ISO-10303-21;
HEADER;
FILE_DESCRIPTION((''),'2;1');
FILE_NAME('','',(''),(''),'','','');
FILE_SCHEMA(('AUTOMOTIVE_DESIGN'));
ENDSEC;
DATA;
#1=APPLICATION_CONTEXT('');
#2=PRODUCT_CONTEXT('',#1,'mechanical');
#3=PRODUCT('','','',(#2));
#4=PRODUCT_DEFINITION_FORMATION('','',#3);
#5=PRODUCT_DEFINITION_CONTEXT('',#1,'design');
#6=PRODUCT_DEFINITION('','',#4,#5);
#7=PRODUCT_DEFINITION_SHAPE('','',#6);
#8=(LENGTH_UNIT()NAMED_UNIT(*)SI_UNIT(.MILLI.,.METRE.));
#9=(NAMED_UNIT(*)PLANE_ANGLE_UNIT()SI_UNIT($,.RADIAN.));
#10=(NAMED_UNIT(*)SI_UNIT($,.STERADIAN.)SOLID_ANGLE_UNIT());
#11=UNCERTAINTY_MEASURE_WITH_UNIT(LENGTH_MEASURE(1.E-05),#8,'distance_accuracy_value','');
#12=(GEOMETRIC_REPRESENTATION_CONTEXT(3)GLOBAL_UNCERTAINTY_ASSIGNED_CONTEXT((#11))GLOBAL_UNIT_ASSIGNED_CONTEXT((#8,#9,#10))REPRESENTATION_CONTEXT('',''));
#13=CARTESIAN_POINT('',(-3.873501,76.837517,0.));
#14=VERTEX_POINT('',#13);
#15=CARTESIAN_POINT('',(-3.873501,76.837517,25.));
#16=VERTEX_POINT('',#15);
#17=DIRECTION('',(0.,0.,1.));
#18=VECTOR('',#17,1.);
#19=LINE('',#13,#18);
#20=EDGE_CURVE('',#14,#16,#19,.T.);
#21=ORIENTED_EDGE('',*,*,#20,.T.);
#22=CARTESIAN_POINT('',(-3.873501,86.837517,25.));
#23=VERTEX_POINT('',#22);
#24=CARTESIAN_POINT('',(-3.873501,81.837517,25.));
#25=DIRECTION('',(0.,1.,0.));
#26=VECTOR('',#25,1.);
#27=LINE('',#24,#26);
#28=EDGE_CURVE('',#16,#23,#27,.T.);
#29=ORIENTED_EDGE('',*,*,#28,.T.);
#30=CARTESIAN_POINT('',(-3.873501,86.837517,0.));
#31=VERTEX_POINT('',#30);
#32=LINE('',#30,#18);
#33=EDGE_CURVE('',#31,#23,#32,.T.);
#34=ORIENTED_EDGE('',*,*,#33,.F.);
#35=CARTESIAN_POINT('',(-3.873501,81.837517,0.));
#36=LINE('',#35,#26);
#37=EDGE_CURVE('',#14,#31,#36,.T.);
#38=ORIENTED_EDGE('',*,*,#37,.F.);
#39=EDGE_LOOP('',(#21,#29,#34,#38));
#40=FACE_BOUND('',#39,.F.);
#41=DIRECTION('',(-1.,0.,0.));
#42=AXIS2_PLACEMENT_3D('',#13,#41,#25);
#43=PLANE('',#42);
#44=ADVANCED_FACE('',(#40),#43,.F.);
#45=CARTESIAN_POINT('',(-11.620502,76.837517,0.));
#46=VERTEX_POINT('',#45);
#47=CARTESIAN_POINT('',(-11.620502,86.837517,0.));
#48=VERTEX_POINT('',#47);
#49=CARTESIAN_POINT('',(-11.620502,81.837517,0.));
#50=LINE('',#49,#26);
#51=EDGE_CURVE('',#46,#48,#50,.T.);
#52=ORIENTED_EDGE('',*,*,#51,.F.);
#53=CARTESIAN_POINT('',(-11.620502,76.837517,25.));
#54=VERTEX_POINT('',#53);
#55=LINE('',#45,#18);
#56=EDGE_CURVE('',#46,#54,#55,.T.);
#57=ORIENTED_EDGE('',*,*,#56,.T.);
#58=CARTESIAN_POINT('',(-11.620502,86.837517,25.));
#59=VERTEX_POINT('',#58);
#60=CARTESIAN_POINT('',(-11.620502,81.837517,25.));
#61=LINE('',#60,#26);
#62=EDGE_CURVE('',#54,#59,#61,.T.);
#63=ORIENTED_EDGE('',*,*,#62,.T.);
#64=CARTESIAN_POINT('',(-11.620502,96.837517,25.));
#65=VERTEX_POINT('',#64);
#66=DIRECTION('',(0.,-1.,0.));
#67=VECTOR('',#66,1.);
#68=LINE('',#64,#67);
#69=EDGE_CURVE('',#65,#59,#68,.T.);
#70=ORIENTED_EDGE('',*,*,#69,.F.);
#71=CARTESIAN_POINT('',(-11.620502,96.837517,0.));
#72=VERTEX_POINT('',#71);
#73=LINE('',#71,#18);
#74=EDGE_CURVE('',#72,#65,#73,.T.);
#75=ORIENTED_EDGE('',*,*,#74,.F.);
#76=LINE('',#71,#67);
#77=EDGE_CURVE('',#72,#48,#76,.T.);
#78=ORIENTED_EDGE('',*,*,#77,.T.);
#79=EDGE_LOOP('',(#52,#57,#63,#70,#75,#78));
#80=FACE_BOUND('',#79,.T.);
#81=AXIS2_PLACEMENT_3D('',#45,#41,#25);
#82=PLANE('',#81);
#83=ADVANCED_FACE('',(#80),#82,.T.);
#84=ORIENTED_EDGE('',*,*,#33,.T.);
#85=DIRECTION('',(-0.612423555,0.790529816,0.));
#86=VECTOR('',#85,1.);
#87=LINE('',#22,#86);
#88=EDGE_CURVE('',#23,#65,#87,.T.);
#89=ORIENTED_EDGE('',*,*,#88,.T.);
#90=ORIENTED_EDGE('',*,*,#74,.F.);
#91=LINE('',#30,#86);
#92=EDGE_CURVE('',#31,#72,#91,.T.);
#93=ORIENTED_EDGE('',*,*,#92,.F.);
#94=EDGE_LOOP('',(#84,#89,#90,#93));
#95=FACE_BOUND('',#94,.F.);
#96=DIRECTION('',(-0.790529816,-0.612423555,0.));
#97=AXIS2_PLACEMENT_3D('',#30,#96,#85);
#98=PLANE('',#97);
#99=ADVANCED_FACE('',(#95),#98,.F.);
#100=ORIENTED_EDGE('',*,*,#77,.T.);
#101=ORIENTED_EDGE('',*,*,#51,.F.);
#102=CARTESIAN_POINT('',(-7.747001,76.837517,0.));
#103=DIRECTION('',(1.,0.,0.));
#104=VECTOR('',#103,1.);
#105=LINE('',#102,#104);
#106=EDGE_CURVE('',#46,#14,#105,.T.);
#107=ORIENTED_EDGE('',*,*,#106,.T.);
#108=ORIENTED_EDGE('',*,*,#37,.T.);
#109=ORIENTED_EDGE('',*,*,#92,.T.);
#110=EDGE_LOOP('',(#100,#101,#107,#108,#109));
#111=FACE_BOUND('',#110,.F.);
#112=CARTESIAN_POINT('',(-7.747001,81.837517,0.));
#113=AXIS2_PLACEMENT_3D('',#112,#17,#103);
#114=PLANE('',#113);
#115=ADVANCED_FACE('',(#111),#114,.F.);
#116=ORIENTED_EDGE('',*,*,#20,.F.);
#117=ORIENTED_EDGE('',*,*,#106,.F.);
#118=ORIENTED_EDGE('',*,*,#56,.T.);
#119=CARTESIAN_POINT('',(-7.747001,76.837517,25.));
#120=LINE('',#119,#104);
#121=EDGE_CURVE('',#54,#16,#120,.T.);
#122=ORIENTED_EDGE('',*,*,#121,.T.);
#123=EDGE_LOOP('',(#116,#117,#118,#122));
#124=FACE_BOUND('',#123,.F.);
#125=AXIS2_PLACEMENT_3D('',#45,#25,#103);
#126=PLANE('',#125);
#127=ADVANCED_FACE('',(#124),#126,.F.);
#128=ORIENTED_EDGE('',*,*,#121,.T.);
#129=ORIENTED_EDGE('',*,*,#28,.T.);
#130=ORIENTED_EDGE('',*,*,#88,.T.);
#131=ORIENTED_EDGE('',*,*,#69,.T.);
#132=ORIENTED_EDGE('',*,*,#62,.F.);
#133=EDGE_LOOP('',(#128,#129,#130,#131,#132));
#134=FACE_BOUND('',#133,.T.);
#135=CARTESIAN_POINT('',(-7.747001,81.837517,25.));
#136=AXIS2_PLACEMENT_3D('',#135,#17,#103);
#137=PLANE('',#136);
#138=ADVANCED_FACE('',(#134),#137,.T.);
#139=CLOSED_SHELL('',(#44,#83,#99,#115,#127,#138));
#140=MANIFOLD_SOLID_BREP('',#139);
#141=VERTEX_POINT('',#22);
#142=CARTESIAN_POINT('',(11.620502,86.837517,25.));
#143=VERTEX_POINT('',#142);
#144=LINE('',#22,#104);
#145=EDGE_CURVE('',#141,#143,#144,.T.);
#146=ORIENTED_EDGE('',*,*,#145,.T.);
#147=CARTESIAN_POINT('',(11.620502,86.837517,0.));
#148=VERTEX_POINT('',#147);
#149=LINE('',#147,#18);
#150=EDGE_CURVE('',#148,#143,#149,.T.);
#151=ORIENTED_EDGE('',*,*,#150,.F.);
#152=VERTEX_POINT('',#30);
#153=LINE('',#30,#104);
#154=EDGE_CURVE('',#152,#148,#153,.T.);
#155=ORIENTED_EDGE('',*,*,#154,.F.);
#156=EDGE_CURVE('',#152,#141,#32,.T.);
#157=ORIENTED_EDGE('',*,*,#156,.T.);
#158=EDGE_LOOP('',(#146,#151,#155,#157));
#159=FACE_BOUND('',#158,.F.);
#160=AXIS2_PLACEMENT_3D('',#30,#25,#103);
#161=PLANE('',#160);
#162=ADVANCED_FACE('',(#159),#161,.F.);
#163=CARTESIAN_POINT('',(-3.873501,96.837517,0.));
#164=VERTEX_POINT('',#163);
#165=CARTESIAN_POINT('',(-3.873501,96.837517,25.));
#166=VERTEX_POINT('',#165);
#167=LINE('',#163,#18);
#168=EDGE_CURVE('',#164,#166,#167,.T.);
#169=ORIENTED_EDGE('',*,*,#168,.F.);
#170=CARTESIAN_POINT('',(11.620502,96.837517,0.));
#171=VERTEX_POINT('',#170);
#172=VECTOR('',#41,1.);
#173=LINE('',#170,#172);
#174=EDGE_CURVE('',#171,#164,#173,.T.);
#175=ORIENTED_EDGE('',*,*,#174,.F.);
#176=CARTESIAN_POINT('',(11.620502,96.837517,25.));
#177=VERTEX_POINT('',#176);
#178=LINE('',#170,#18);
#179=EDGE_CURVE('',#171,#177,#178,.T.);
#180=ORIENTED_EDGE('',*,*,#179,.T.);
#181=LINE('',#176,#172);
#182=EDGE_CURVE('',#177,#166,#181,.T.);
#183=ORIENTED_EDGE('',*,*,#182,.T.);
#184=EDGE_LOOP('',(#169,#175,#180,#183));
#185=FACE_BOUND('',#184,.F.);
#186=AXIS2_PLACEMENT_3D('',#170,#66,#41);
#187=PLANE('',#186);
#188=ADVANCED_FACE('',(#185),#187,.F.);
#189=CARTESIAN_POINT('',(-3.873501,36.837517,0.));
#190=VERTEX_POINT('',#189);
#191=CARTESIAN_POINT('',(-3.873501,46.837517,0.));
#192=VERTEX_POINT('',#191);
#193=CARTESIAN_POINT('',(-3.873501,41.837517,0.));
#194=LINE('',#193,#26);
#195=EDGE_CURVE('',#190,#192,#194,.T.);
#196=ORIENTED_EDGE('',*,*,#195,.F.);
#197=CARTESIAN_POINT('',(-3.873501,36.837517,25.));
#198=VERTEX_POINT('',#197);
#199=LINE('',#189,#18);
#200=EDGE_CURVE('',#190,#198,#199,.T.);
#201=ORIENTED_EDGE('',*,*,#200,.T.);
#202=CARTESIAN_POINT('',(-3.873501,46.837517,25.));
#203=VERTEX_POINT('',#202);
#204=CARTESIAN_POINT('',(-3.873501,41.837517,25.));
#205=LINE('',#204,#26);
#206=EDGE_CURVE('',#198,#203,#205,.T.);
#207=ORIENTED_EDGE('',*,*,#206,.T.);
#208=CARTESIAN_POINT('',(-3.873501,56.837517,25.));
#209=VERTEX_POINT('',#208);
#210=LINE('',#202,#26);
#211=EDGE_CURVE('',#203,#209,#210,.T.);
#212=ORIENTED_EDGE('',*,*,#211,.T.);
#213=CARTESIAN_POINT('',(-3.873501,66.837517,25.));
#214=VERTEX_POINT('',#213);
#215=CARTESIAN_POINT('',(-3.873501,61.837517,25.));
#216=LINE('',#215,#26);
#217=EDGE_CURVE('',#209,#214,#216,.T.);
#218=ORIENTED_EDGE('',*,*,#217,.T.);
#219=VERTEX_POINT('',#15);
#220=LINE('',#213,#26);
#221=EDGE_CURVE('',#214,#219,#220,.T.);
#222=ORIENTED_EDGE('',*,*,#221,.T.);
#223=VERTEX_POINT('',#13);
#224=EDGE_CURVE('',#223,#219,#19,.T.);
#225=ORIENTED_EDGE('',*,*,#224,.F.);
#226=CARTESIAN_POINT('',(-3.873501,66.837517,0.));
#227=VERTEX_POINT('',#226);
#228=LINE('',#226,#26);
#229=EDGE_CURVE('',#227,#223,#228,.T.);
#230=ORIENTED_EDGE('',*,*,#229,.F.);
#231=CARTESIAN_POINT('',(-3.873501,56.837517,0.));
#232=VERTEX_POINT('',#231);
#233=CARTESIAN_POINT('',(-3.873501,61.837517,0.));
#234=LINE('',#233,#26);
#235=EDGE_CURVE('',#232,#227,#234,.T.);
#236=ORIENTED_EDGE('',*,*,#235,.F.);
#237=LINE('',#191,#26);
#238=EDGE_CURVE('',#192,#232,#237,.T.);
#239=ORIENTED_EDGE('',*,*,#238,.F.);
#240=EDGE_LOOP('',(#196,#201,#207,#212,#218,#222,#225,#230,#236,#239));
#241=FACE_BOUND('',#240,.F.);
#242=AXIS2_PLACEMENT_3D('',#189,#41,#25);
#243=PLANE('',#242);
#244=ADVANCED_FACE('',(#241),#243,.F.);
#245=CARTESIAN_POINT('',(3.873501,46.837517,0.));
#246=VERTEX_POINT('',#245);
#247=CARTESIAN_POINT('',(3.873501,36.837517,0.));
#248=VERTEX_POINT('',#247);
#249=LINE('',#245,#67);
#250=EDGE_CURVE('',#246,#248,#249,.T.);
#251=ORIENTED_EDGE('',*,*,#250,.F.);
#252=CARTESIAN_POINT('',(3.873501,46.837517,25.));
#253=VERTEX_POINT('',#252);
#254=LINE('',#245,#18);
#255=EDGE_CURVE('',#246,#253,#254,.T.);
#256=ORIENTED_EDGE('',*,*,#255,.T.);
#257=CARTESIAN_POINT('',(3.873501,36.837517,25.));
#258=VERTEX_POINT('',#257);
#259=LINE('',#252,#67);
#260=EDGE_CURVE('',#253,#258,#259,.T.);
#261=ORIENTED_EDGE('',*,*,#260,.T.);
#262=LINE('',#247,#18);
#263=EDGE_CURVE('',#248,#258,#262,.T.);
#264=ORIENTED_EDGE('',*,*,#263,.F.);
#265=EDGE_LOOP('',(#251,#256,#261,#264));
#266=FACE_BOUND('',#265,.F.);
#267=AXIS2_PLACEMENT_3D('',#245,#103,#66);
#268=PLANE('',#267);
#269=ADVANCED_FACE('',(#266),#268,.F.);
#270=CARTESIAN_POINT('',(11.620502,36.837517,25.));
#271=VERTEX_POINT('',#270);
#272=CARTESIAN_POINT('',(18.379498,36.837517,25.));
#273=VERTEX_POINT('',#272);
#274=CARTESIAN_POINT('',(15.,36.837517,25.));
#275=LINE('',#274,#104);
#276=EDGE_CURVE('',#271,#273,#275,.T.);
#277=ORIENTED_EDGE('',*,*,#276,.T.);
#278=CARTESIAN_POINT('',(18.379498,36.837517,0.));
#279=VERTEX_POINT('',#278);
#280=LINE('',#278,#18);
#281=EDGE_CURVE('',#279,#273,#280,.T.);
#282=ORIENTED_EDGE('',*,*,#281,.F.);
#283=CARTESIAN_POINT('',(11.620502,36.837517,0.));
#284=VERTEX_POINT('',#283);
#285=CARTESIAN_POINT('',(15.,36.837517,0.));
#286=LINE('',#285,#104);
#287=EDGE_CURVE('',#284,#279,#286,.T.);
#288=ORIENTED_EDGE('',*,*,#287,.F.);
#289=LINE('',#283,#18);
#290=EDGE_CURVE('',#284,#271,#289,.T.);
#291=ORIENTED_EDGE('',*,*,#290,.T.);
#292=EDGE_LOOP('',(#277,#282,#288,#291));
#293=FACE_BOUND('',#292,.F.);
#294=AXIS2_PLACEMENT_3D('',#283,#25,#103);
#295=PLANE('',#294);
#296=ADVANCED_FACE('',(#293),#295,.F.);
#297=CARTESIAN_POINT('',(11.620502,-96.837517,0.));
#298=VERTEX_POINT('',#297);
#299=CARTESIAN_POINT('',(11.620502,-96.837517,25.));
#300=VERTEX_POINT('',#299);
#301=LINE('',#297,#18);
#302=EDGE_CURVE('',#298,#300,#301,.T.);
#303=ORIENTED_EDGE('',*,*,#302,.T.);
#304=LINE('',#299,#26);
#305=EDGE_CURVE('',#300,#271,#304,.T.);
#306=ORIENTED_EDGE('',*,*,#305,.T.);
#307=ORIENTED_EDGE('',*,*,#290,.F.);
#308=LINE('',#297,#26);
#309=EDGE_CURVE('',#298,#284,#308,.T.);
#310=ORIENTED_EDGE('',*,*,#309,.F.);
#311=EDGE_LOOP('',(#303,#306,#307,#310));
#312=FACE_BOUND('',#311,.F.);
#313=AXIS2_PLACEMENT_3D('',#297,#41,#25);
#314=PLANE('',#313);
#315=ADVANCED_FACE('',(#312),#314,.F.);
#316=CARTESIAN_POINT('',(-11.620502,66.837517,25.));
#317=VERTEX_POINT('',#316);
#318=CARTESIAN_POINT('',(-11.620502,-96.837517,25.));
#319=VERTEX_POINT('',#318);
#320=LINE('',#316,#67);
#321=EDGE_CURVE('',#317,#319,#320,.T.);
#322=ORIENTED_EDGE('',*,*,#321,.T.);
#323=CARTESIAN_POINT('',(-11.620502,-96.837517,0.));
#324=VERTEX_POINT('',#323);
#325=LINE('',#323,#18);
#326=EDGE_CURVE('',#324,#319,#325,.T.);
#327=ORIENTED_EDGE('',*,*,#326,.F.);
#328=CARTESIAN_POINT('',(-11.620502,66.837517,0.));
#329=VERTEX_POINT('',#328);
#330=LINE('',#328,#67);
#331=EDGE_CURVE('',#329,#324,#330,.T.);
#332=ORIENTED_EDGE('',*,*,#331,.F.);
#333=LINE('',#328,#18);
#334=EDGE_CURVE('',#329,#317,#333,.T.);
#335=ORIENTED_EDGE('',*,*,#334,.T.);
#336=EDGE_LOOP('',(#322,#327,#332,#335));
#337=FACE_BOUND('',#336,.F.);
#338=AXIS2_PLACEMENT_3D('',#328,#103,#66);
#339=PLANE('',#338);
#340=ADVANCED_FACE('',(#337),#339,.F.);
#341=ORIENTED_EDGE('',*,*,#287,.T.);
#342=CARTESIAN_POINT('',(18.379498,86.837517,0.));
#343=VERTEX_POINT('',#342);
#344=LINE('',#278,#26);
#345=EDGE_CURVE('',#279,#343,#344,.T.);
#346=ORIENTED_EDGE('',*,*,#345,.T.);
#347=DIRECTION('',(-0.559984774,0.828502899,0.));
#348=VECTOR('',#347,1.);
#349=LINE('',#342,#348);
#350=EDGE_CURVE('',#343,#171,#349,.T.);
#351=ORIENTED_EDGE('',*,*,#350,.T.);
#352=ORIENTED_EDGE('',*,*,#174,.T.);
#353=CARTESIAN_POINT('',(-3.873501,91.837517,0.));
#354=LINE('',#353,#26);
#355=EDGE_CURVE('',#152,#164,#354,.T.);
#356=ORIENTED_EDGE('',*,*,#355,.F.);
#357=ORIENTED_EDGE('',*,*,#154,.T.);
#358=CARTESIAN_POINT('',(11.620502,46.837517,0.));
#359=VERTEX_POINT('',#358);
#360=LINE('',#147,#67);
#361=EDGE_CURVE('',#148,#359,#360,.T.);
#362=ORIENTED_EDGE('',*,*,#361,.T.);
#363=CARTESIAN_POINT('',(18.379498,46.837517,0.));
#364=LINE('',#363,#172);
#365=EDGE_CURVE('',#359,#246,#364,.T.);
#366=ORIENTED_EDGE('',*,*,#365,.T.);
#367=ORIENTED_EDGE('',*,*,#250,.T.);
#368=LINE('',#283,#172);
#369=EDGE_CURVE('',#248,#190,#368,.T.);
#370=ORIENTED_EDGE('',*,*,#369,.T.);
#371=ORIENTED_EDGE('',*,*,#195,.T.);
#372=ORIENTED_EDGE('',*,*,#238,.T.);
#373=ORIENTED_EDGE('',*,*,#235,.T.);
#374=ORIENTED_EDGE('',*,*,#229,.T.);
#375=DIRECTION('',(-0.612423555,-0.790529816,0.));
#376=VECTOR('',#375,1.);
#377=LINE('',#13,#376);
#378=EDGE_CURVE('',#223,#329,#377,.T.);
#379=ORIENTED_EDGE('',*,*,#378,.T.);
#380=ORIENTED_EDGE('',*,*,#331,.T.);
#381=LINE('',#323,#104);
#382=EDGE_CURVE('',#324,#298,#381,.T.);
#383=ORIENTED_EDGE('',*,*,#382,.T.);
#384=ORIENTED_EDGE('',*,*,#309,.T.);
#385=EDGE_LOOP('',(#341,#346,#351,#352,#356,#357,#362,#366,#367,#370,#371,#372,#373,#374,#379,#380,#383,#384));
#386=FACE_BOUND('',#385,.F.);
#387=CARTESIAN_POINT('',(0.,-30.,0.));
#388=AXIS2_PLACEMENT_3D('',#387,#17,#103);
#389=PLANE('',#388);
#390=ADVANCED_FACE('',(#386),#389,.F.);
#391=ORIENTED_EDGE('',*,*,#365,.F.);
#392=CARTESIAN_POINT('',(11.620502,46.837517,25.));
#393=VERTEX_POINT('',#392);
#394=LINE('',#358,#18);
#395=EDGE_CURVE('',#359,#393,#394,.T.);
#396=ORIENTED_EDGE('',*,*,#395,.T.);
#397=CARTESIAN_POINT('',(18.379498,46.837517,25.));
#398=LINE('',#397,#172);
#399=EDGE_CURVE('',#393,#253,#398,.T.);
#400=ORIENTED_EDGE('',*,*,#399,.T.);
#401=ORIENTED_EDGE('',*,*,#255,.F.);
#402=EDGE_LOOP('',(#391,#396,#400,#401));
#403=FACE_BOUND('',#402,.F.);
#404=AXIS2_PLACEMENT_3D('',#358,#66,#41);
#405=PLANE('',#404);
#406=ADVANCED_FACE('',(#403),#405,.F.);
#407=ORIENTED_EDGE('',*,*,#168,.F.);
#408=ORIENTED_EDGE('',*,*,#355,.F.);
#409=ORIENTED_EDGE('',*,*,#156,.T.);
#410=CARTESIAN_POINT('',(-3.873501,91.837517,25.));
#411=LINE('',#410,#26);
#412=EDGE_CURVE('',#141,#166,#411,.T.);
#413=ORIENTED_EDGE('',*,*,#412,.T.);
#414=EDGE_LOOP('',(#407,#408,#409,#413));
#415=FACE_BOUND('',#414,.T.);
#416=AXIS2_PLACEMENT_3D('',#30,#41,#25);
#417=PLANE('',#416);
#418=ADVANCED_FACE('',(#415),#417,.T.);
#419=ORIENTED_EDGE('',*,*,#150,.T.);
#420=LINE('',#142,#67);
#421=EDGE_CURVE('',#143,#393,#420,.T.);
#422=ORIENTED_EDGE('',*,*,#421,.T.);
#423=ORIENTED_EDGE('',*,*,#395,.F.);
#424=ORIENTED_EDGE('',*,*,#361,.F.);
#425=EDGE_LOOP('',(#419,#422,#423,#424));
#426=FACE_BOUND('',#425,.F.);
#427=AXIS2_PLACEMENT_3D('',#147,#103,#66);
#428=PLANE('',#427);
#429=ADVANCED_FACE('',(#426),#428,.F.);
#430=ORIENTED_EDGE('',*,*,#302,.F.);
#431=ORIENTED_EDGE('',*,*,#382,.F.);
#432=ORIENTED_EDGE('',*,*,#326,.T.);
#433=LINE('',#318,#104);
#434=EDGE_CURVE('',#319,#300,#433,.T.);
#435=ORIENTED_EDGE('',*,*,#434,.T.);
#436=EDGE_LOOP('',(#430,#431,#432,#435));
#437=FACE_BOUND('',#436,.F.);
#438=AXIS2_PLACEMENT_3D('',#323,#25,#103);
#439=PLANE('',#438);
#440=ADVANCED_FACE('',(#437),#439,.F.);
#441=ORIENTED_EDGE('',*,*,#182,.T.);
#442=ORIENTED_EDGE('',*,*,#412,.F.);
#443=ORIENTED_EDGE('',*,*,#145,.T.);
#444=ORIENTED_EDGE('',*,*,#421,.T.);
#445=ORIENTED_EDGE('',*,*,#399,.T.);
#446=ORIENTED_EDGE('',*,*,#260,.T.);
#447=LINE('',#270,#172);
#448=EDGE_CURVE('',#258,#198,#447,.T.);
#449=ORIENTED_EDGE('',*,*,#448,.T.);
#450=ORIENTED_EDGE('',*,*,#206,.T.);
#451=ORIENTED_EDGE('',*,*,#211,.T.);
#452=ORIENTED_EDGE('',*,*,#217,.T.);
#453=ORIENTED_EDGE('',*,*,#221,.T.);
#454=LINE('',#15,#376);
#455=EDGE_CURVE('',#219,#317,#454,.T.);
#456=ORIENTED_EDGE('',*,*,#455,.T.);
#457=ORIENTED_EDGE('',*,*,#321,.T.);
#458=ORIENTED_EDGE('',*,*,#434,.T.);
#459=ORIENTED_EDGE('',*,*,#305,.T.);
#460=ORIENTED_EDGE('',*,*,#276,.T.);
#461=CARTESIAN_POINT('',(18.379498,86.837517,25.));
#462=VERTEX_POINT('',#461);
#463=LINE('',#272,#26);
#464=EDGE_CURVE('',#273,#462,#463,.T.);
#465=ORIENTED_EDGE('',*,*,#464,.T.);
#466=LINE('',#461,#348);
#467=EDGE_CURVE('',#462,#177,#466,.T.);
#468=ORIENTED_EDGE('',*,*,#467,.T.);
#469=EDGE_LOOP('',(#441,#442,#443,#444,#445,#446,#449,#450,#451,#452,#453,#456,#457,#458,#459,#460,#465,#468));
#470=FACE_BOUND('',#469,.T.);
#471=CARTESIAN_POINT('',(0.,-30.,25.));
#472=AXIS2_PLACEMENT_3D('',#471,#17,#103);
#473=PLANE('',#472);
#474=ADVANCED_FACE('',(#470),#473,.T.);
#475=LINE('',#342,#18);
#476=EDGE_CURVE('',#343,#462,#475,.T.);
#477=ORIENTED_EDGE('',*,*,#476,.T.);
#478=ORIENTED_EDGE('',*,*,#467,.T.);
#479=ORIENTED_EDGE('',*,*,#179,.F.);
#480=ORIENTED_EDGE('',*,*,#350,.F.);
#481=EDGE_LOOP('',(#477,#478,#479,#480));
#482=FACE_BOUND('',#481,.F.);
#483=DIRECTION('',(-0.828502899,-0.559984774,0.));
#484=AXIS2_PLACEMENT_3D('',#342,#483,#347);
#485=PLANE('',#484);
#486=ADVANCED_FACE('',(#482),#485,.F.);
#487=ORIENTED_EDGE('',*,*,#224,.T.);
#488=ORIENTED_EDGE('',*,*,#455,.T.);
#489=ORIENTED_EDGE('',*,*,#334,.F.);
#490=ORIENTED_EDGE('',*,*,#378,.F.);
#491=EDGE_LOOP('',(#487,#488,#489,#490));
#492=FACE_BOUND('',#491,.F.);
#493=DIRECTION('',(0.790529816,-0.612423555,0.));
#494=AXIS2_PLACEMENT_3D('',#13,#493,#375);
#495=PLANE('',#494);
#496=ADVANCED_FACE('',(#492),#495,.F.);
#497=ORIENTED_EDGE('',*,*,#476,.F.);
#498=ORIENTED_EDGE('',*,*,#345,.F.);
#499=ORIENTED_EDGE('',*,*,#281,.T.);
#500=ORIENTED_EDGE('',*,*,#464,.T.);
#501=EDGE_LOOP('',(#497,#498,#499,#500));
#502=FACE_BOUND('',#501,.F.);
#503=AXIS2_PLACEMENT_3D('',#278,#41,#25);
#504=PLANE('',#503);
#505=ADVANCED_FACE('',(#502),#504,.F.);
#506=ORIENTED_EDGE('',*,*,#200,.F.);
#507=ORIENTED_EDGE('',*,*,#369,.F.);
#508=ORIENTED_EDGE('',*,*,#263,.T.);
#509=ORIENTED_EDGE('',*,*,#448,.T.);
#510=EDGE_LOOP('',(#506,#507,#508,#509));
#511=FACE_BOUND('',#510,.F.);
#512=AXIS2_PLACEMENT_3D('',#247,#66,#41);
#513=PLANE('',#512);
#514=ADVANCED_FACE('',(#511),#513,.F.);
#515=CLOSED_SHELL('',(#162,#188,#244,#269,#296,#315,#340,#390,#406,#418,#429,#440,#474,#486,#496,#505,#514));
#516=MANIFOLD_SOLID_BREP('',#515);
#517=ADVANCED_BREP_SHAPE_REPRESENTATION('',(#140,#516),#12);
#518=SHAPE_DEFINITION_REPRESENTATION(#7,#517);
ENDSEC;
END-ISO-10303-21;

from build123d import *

# Parameters (mm, degrees)
F0_W     = 7.7470013483
F0_H     = 133.6750337083
F0_H_2   = 10
F0_W_2   = 6.758995955
F1_DEPTH = 25


with BuildPart() as f1:
    # F0 (on Top) → F1 (new body)
    with BuildSketch(Plane.XY):
        with Locations((0, -30)):
            Rectangle(F0_W, F0_H)
        with Locations((-7.7470013483, -30)):
            Rectangle(F0_W, F0_H)
        with Locations((7.7470013483, -30)):
            Rectangle(F0_W, F0_H)
        with Locations((-7.7470013483, 41.8375168541)):
            Rectangle(F0_W, F0_H_2)
        Polygon((3.8735006742, 46.8375168541), (3.8735006742, 36.8375168541), (11.6205020225, 36.8375168541), (11.6205020225, 46.8375168541), (8.7326292689, 46.8375168541), align=None)
        Polygon((-11.6205020225, 56.8375168541), (-3.8735006742, 46.8375168541), (-3.8735006742, 56.8375168541), align=None)
        Polygon((-11.6205020225, 46.8375168541), (-3.8735006742, 46.8375168541), (-11.6205020225, 56.8375168541), align=None)
        with Locations((15, 41.8375168541)):
            Rectangle(F0_W_2, F0_H_2)
        with Locations((-7.7470013483, 61.8375168541)):
            Rectangle(F0_W, F0_H_2)
        with Locations((15, 51.8375168541)):
            Rectangle(F0_W_2, F0_H_2)
        Polygon((-11.6205020225, 66.8375168541), (-3.8735006742, 66.8375168541), (-3.8735006742, 76.8375168541), align=None)
        with Locations((15, 61.8375168541)):
            Rectangle(F0_W_2, F0_H_2)
        Polygon((18.3794979775, 76.8375168541), (11.6205020225, 66.8375168541), (18.3794979775, 66.8375168541), align=None)
        Polygon((11.6205020225, 76.8375168541), (11.6205020225, 66.8375168541), (18.3794979775, 76.8375168541), align=None)
        with Locations((0, 91.8375168541)):
            Rectangle(F0_W, F0_H_2)
        with Locations((7.7470013483, 91.8375168541)):
            Rectangle(F0_W, F0_H_2)
        with Locations((15, 81.8375168541)):
            Rectangle(F0_W_2, F0_H_2)
        Polygon((11.6205020225, 96.8375168541), (11.6205020225, 86.8375168541), (18.3794979775, 86.8375168541), align=None)
    extrude(amount=F1_DEPTH)


with BuildPart() as f1b:
    # F0 (on Top) → F1, piece 2 (new body)
    with BuildSketch(Plane.XY):
        with Locations((-7.7470013483, 81.8375168541)):
            Rectangle(F0_W, F0_H_2)
        Polygon((-11.6205020225, 86.8375168541), (-3.8735006742, 86.8375168541), (-11.6205020225, 96.8375168541), align=None)
    extrude(amount=F1_DEPTH)


solid = Compound([f1.part, f1b.part])
